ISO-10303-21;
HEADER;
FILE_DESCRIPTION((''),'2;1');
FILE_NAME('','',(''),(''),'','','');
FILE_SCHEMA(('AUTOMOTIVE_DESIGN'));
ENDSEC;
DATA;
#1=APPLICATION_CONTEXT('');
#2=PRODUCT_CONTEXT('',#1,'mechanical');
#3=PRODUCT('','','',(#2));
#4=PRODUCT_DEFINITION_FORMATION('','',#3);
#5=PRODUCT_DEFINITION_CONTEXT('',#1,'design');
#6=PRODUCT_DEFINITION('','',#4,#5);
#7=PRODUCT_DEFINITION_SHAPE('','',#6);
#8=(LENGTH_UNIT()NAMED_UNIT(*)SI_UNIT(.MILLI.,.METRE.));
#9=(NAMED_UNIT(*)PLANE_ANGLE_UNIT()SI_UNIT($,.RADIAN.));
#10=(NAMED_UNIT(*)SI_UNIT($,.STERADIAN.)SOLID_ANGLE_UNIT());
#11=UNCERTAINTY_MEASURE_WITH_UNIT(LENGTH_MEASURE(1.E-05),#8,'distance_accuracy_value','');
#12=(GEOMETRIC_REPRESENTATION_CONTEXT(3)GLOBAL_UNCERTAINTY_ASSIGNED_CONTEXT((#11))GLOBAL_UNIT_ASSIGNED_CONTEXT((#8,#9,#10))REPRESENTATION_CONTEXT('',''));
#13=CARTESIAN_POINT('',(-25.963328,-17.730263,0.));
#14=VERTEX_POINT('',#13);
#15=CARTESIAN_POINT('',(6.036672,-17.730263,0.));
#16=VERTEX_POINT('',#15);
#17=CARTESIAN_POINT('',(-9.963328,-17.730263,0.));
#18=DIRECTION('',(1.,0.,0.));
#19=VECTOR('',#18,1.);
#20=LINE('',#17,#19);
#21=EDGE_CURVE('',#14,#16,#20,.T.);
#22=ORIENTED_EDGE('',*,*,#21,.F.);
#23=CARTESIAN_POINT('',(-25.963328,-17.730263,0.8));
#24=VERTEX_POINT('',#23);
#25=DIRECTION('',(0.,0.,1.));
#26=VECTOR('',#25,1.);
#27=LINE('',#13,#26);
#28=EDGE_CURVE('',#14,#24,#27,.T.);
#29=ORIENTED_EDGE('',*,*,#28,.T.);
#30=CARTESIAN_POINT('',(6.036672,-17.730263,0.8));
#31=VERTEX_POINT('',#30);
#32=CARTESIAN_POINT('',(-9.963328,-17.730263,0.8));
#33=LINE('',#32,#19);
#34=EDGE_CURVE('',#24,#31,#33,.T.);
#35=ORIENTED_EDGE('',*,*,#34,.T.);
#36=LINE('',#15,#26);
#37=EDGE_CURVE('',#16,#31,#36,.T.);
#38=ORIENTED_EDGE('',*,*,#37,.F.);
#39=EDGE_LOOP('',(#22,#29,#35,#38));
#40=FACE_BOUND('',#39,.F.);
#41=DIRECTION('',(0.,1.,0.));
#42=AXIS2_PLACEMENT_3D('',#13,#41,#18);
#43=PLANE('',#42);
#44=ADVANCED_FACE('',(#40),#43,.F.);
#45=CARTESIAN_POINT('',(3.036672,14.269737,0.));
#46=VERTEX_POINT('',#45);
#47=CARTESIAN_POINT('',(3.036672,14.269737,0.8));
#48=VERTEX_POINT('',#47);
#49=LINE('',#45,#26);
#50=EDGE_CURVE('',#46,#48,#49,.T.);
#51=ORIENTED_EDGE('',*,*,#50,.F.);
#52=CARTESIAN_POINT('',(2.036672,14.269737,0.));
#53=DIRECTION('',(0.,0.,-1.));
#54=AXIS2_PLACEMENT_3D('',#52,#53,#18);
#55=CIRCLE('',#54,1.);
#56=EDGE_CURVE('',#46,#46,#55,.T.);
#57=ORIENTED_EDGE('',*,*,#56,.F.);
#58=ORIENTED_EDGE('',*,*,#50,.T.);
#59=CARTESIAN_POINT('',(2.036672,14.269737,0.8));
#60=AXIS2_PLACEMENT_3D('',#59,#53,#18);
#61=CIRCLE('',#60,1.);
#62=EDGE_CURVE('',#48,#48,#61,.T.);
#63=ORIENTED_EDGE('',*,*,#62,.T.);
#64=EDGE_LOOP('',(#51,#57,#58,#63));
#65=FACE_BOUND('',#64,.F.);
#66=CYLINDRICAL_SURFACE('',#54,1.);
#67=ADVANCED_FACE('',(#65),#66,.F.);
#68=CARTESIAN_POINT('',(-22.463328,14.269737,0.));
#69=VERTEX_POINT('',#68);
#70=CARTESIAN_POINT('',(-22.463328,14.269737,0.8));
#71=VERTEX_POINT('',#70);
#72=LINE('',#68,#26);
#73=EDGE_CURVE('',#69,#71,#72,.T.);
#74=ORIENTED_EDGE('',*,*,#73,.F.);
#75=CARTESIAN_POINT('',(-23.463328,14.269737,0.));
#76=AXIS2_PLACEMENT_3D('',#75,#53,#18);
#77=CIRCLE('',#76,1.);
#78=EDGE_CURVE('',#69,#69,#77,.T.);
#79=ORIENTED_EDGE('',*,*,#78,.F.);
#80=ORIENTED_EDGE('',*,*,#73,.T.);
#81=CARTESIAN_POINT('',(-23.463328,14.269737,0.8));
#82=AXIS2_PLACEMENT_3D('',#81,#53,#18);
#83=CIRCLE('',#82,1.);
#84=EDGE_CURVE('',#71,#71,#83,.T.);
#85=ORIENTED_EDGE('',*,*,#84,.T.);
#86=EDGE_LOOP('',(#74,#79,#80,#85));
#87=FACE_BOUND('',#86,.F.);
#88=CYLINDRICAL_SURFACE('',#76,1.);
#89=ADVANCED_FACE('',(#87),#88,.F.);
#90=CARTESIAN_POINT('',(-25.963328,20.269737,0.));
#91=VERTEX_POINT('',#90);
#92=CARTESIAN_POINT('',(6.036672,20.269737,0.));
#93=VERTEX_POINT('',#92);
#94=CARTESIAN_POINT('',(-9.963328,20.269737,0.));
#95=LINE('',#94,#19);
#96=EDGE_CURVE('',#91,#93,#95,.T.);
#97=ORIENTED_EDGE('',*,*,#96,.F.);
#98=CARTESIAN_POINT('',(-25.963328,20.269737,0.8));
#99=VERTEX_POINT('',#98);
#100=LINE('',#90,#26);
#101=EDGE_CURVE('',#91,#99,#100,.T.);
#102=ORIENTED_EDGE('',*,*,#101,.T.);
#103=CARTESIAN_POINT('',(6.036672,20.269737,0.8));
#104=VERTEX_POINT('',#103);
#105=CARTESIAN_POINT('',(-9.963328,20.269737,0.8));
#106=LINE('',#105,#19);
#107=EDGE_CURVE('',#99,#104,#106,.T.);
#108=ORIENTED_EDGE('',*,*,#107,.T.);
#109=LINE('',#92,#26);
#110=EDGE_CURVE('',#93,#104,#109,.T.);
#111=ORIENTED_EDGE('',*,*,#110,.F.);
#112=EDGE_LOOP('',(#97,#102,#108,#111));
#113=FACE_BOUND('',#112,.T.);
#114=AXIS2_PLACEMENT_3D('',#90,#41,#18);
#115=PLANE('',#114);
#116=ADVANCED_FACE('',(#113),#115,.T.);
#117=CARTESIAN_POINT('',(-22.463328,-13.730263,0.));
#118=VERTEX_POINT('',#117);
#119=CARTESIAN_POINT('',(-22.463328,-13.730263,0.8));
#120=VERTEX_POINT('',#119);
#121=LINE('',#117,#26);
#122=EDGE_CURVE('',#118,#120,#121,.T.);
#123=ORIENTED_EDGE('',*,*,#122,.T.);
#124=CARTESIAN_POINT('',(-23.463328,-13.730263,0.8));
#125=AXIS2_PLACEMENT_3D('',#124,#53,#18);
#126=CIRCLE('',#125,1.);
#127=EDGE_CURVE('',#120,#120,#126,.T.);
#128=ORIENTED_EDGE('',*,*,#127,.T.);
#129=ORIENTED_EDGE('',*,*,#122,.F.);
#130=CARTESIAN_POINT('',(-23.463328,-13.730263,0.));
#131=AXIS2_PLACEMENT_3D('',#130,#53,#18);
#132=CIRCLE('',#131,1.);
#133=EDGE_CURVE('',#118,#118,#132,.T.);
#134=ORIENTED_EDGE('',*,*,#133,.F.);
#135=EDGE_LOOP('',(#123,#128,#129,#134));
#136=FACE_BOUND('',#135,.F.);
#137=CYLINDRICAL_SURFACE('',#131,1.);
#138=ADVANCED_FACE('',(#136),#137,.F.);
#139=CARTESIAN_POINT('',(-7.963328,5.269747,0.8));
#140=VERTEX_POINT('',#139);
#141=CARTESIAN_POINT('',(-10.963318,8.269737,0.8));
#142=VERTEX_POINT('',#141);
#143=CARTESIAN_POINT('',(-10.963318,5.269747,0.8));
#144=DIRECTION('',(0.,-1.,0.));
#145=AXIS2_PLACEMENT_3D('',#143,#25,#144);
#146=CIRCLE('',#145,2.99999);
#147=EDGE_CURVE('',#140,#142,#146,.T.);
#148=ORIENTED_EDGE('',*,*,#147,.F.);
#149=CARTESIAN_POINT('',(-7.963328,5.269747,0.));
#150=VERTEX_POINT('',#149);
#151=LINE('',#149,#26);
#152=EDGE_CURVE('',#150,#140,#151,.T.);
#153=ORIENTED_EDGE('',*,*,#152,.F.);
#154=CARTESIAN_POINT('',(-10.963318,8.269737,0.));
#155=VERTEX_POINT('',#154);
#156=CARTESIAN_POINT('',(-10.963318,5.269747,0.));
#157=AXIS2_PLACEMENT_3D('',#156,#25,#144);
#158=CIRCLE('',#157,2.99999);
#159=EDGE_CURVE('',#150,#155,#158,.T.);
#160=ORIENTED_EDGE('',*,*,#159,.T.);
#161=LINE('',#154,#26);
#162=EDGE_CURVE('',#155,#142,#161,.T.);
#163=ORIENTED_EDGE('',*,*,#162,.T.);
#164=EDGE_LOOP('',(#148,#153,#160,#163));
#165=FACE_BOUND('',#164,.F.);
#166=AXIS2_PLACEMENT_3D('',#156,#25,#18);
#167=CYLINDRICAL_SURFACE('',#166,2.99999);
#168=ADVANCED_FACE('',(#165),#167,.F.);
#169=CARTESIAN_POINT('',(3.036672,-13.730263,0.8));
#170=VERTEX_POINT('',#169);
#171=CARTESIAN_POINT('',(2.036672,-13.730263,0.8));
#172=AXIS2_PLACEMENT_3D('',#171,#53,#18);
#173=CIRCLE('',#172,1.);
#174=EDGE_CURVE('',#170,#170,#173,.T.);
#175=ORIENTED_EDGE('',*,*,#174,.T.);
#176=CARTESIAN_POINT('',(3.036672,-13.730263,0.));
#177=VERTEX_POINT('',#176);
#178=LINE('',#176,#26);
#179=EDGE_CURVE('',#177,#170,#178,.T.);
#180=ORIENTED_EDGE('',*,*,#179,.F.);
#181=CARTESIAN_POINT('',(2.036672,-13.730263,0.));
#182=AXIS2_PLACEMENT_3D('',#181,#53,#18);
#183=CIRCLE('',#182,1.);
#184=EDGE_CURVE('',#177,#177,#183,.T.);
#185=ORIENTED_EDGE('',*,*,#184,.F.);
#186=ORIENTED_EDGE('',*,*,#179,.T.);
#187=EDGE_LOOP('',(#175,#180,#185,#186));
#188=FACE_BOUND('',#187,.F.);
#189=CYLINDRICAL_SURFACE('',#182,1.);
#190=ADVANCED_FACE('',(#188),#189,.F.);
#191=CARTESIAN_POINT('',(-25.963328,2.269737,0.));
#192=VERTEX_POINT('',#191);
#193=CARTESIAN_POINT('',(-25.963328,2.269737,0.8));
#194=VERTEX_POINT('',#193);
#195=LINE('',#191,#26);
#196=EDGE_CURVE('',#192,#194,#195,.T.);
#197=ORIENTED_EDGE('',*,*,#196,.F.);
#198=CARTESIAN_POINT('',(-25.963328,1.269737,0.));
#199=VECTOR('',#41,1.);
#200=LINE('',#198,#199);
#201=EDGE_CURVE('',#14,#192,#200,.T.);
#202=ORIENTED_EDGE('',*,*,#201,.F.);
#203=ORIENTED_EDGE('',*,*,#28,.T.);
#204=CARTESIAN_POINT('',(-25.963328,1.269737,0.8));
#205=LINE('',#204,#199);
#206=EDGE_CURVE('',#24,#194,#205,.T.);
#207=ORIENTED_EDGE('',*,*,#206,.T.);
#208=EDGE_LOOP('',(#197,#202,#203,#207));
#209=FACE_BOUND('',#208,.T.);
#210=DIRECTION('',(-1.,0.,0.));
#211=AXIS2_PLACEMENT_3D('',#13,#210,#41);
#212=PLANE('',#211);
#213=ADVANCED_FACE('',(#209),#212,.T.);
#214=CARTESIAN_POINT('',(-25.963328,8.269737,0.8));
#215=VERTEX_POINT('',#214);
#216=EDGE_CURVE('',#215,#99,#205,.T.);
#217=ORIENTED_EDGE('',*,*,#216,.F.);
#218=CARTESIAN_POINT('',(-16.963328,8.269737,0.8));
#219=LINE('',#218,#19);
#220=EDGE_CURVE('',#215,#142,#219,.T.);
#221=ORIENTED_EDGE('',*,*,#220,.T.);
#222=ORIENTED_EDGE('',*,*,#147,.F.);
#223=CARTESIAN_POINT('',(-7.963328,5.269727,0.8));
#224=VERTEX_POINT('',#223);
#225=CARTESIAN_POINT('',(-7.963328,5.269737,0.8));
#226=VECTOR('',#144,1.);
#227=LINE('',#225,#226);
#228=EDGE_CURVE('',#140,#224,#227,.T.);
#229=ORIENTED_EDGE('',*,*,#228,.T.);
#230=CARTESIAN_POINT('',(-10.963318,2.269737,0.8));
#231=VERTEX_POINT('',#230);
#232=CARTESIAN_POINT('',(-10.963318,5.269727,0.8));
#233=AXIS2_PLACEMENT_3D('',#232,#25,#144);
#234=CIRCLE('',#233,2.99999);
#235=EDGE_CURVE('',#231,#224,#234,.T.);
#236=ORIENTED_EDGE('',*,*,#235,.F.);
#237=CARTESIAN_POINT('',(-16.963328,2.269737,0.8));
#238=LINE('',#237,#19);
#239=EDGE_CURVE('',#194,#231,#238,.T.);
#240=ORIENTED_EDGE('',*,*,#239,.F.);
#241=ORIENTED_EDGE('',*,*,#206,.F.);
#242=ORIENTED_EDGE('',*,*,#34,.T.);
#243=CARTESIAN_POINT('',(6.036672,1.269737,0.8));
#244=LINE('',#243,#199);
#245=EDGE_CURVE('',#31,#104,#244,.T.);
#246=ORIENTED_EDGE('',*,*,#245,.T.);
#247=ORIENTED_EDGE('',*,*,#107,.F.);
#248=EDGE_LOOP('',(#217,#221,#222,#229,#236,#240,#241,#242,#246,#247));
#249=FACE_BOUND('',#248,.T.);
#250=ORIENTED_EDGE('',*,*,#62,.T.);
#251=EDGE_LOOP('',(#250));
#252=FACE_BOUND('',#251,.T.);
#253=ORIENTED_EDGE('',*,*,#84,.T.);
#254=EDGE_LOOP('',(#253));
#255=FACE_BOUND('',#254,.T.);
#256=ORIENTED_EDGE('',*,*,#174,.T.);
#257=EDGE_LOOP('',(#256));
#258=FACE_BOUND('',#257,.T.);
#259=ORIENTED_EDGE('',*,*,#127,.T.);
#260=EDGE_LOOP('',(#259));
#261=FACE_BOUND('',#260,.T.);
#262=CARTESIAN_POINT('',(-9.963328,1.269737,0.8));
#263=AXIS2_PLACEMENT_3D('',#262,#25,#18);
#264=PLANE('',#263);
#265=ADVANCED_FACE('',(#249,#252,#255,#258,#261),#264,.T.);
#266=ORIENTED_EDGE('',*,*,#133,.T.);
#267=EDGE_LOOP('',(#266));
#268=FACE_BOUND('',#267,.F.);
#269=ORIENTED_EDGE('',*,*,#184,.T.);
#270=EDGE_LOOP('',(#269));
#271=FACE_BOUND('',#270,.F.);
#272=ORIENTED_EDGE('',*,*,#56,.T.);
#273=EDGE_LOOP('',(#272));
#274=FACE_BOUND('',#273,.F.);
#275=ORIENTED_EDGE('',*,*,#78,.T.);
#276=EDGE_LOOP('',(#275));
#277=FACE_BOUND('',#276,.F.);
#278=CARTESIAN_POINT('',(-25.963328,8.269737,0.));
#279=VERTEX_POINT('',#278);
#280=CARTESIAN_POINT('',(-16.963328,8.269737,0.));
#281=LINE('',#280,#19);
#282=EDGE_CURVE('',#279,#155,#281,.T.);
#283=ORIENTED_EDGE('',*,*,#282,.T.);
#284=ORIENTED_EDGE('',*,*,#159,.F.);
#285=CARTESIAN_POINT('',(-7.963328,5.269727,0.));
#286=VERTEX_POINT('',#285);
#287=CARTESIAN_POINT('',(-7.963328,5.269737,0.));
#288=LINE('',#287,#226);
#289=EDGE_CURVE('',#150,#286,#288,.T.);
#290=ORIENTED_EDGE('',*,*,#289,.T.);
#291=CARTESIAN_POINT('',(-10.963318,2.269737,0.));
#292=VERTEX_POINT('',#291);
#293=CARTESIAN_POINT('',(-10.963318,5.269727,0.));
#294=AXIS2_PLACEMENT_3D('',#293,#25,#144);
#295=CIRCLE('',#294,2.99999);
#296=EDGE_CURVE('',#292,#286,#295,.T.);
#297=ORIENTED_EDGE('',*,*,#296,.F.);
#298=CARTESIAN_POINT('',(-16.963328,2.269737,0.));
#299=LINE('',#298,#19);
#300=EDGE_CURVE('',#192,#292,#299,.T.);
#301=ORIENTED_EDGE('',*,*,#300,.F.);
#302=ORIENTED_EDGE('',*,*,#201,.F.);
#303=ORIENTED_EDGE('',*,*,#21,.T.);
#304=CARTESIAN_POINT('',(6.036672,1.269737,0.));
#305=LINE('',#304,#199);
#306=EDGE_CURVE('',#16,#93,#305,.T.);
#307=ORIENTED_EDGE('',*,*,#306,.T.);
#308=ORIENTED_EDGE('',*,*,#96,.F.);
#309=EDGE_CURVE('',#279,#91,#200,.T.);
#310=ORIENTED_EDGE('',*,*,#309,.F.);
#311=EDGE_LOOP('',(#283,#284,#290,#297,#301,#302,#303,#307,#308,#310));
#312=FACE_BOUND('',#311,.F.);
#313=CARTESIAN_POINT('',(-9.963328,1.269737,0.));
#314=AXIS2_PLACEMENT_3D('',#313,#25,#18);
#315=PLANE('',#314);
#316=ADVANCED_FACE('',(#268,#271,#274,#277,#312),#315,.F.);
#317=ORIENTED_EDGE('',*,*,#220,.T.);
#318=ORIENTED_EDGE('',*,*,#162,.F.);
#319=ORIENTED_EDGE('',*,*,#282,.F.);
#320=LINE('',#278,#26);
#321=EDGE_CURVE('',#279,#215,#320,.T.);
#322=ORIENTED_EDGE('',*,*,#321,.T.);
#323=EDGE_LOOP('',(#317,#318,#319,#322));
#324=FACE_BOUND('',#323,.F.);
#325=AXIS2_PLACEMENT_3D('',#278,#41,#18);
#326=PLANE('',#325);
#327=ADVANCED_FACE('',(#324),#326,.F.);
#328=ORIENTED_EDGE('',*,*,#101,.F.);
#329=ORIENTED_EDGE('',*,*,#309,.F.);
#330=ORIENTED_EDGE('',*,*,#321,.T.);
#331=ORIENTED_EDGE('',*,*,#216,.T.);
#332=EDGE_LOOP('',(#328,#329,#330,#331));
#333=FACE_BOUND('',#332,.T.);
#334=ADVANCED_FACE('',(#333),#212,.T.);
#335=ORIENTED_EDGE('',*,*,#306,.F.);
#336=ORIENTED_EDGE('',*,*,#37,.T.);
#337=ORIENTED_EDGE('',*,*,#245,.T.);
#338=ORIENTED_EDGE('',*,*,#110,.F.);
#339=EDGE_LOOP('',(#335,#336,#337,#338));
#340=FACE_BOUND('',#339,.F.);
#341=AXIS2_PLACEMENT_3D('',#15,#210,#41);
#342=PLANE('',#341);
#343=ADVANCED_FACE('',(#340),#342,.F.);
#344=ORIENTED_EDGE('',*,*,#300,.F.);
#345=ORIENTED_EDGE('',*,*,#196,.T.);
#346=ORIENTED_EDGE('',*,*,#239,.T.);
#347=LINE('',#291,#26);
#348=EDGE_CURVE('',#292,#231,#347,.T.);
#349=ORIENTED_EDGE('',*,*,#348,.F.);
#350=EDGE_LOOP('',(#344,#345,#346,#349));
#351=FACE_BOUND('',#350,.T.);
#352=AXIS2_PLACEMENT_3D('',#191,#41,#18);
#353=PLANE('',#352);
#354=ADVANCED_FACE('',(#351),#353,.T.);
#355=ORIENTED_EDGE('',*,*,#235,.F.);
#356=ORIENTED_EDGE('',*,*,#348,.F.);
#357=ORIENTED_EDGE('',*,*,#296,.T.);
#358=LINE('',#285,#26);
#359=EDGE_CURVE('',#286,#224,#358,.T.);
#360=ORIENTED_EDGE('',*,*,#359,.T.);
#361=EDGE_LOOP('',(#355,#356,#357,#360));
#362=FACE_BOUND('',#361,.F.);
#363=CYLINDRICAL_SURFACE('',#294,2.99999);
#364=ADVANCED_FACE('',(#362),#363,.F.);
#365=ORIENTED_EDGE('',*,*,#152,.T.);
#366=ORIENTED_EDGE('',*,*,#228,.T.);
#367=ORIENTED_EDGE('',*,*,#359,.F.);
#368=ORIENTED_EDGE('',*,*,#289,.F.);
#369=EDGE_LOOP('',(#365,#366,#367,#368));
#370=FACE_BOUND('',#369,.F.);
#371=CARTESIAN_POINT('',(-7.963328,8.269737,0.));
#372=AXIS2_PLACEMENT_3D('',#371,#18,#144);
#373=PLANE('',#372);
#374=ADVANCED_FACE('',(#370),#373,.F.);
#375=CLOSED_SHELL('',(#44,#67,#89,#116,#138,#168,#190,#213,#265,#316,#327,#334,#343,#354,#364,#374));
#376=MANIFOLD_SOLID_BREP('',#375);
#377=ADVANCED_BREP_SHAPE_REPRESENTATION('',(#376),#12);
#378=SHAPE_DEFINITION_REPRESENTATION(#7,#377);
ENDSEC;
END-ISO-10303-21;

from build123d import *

# Parameters (mm, degrees)
F0_W     = 32
F0_H     = 38
F1_DEPTH = 0.8
F2_R     = 1
F2_W     = 18
F2_H     = 6
F3_DEPTH = 0.8
F4_R     = 2.99999


# Not quite as in the source:
# - a fillet or chamfer is up to 0.001 mm smaller than in the source, because OpenCascade refuses the exact size


with BuildPart() as f1:
    # F0 (on Top) → F1 (new body)
    with BuildSketch(Plane.XY):
        with Locations((-9.963327945, 1.2697370127)):
            Rectangle(F0_W, F0_H)
    extrude(amount=F1_DEPTH)

    # F2 (on face) → F3 (cut, through all)
    with BuildSketch(Plane(origin=(0, 0, 0), x_dir=(1, 0, 0), z_dir=(0, 0, -1))):
        with Locations((-23.463327945, 13.7302629873)):
            Circle(F2_R)
        with Locations((-23.463327945, -14.2697370127)):
            Circle(F2_R)
        with Locations((2.036672055, 13.7302629873)):
            Circle(F2_R)
        with Locations((2.036672055, -14.2697370127)):
            Circle(F2_R)
        with Locations((-16.963327945, -5.2697370127)):
            Rectangle(F2_W, F2_H)
    extrude(amount=-F3_DEPTH, mode=Mode.SUBTRACT)

    # F4 (radius 3 in the source; OpenCascade refuses exactly that, so slightly less here)
    f4_edges = [f1.edges().sort_by_distance(p)[0] for p in [
        (-7.963328, 8.269737, 0.4),
        (-7.963328, 2.269737, 0.4),
    ]]
    fillet(f4_edges, radius=F4_R)


solid = f1.part
